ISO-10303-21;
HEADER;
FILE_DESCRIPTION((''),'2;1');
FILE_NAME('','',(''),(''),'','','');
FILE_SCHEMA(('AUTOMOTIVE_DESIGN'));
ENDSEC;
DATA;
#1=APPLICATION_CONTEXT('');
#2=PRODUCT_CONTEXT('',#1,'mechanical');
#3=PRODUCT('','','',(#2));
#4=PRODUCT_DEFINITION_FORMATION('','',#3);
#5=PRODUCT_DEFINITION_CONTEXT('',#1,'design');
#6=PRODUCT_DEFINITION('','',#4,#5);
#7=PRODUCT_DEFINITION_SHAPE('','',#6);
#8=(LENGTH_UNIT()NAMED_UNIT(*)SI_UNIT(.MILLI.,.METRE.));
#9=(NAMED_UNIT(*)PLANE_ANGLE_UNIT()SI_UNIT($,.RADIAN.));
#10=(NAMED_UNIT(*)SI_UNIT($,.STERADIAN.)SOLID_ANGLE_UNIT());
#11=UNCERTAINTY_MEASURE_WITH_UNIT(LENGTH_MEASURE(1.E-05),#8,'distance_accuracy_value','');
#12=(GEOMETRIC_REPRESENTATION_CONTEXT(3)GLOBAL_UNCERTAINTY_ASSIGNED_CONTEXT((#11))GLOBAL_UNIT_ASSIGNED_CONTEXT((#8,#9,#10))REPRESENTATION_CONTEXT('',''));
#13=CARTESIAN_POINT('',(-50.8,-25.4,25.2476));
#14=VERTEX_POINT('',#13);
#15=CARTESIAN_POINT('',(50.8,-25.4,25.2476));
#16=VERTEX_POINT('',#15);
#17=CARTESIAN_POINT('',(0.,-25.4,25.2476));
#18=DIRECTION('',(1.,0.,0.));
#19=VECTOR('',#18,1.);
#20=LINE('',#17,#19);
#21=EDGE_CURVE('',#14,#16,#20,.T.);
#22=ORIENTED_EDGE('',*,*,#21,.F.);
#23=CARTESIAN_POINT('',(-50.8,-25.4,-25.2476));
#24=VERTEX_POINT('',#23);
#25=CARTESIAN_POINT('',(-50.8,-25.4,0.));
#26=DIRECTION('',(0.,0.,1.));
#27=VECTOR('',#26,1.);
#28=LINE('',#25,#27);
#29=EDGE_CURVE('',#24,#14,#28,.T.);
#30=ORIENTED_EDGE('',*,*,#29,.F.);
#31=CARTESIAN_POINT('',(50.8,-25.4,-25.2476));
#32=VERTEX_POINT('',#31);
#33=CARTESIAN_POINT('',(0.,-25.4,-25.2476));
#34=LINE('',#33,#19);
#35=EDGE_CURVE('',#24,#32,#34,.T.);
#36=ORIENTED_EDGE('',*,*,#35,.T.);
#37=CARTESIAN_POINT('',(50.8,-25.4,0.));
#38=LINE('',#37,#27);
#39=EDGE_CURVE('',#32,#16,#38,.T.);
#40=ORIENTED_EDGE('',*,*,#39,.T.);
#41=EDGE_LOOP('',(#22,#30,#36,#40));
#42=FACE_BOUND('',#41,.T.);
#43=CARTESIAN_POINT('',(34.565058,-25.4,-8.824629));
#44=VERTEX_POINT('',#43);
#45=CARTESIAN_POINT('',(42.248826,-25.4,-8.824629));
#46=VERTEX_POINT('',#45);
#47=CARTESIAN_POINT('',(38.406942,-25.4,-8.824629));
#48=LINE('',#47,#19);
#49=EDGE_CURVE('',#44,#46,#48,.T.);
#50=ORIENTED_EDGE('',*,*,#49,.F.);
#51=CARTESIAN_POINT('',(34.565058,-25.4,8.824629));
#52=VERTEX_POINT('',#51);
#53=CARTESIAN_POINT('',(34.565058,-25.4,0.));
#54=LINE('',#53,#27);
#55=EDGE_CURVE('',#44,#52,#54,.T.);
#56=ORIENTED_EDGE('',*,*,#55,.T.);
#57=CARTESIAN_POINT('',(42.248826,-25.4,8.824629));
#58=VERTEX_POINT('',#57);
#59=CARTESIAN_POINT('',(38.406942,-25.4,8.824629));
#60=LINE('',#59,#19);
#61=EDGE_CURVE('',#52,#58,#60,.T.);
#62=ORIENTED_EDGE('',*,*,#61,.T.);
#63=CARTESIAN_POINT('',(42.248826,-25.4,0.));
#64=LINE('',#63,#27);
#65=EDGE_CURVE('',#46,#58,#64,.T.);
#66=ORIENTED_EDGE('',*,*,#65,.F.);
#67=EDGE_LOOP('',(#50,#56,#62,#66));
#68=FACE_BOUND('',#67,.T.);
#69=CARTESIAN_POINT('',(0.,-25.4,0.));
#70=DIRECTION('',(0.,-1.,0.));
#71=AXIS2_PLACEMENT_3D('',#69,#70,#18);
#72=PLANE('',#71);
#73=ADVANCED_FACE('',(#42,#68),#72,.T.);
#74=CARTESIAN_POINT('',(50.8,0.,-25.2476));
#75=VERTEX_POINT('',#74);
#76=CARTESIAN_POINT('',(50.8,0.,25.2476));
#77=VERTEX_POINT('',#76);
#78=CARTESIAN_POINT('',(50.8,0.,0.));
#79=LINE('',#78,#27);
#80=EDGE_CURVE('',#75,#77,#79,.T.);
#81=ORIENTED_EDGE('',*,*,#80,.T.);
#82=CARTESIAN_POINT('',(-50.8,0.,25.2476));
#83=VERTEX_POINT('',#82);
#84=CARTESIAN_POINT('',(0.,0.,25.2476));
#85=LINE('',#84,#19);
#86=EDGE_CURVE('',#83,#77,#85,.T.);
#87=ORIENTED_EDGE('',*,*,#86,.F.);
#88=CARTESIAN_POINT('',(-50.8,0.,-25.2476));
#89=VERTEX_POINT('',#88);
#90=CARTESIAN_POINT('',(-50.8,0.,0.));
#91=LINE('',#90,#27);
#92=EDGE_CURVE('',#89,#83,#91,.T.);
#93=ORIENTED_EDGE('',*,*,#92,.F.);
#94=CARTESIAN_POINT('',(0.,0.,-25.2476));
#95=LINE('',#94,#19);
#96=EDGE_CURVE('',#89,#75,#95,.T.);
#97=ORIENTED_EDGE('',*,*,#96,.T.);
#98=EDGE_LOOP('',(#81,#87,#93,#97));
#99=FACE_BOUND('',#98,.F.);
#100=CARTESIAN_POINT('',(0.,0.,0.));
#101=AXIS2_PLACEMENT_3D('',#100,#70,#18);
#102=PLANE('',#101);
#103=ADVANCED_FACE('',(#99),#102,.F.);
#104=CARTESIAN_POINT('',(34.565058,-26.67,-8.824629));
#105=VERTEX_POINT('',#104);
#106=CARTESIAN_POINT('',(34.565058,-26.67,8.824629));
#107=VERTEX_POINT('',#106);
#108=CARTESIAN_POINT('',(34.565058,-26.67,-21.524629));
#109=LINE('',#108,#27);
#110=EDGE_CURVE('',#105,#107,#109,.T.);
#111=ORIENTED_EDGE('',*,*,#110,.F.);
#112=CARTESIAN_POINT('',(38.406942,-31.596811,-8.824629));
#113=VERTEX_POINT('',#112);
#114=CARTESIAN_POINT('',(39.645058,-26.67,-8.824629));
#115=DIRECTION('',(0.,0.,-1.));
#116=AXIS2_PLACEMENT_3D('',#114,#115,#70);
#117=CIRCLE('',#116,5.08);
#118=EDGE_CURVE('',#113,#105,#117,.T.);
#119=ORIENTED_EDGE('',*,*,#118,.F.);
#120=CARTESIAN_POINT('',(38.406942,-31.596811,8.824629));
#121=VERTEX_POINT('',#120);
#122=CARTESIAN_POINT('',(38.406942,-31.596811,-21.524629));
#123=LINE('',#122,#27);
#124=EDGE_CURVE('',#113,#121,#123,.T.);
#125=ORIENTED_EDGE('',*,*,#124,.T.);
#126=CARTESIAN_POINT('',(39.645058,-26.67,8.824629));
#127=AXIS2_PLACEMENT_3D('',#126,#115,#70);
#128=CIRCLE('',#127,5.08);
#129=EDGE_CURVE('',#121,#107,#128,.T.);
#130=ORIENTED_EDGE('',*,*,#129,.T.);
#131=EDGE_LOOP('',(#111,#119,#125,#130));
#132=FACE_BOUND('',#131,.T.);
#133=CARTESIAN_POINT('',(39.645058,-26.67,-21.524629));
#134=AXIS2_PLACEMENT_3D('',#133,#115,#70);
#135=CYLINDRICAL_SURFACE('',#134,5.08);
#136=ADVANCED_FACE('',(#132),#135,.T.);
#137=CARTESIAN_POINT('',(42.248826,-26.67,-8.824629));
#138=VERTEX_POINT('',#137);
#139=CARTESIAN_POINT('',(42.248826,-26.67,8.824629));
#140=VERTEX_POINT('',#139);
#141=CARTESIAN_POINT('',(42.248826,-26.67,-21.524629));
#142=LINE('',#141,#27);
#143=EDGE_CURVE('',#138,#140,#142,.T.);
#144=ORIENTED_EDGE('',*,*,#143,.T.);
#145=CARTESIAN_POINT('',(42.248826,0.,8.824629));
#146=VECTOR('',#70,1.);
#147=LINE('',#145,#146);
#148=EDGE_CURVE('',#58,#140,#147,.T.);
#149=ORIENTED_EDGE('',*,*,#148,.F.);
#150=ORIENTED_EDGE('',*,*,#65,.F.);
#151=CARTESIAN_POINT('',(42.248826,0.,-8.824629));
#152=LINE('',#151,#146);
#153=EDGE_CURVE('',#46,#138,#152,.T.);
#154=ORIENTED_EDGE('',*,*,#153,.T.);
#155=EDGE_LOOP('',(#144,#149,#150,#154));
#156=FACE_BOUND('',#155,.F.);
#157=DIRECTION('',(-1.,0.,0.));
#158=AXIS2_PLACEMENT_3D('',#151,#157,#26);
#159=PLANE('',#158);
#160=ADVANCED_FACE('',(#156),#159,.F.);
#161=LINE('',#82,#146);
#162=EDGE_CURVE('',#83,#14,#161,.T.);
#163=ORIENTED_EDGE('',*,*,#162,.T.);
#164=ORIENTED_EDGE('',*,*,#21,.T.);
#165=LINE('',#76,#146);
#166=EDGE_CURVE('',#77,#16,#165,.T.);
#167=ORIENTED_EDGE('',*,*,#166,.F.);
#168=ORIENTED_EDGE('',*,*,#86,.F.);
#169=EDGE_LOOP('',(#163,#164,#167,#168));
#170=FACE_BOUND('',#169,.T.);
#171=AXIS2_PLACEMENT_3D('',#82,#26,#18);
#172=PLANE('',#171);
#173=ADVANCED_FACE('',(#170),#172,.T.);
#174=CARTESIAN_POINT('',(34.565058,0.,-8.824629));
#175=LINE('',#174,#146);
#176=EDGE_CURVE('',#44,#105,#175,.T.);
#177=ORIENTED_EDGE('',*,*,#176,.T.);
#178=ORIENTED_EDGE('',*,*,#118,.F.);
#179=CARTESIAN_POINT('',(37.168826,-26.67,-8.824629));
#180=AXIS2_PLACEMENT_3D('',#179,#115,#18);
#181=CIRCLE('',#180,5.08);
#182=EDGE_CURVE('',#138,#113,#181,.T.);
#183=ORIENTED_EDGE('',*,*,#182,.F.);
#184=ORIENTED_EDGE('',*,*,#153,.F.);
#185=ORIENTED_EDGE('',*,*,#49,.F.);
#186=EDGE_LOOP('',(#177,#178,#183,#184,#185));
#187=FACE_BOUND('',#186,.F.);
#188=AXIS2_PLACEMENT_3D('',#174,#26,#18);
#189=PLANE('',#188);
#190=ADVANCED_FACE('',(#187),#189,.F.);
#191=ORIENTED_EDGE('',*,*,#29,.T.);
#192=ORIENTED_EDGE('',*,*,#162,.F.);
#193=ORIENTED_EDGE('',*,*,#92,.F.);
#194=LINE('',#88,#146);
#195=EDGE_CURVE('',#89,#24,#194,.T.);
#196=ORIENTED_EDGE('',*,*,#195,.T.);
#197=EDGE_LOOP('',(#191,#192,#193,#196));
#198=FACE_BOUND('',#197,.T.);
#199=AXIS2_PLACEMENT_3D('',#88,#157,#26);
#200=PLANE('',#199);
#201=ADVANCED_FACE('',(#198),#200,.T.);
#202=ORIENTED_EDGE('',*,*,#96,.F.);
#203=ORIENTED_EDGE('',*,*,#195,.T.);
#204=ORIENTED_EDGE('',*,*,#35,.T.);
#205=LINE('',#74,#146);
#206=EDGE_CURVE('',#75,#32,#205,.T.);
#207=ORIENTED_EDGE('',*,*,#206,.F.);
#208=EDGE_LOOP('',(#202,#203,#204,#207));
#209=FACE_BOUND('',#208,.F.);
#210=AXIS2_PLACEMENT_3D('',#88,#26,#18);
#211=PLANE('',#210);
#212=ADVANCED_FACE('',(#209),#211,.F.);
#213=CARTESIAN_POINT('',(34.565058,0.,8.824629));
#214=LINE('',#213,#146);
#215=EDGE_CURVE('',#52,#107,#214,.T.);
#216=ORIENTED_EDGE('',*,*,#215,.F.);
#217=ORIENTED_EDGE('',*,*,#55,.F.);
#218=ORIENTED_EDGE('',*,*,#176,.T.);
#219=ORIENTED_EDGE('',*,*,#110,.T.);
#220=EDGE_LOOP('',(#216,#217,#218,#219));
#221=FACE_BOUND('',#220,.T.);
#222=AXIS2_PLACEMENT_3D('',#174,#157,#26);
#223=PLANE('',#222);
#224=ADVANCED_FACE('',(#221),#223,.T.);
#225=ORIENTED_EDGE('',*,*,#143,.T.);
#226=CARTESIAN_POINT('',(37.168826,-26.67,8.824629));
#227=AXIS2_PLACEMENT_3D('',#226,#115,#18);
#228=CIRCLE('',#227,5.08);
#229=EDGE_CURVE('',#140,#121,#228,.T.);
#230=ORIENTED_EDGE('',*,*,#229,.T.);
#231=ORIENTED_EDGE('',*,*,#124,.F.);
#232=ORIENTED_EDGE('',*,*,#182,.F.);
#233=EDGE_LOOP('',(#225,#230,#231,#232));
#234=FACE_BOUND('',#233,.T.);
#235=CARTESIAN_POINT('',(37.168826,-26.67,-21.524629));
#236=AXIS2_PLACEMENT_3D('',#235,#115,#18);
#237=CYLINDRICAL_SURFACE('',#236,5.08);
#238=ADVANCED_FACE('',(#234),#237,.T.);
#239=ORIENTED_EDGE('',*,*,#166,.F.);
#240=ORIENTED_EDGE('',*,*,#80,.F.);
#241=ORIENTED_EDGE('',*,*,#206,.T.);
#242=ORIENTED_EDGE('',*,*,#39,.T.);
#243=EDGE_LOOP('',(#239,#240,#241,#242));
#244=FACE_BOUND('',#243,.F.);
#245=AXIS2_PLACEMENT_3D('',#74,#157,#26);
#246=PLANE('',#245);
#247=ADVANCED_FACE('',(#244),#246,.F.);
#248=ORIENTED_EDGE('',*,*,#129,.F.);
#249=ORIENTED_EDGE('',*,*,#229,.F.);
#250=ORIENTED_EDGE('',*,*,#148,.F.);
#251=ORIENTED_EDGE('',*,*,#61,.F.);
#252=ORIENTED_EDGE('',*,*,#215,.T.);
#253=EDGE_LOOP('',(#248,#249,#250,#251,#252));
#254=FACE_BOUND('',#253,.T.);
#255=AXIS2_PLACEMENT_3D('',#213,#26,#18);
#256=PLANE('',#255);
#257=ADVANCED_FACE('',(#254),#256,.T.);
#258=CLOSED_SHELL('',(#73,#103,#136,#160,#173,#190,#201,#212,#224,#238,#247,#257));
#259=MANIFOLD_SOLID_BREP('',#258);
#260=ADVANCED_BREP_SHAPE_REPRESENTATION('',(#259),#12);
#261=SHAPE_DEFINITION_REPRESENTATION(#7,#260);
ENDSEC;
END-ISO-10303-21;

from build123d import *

# Parameters (mm, degrees)
F0_W        = 7.6837688684
F0_H        = 17.6492575556
F1_DEPTH    = 31.75
F0_W_2      = 101.6
F0_H_2      = 50.4952
F2_DEPTH    = 25.4
F3_T1_DEPTH = 43.0492575556


# Not quite as in the source:
# - a fillet or chamfer that OpenCascade refuses, or shapes differently, is made with other operations: its cross-section is extruded or revolved along the edge and cut away or added


with BuildPart() as f1:
    # F0 (on Front) → F1 (new body)
    with BuildSketch(Plane.XZ):
        with Locations((38.4069420397, 0)):
            Rectangle(F0_W, F0_H)
    extrude(amount=F1_DEPTH)

    # F0 (on Front) → F2 (join)
    with BuildSketch(Plane.XZ):
        Rectangle(F0_W_2, F0_H_2)
        with Locations((38.4069420397, 0)):
            Rectangle(F0_W, F0_H, mode=Mode.SUBTRACT)
    extrude(amount=F2_DEPTH)

    # F3: fillet of radius 5.08 on 2 edges, made by hand

    # F3_s2 → F3_t1 (cut)
    with BuildSketch(Plane.XY.offset(-21.5246287778)):
        with BuildLine():
            ThreePointArc((42.248826474, -26.67), (40.7609289224, -30.2621024484), (37.168826474, -31.75))
            Line((37.168826474, -31.75), (42.248826474, -31.75))
            Line((42.248826474, -31.75), (42.248826474, -26.67))
        make_face()
        with BuildLine():
            ThreePointArc((39.6450576055, -31.75), (36.0529551571, -30.2621024484), (34.5650576055, -26.67))
            Line((34.5650576055, -26.67), (34.5650576055, -31.75))
            Line((34.5650576055, -31.75), (39.6450576055, -31.75))
        make_face()
    extrude(amount=F3_T1_DEPTH, mode=Mode.SUBTRACT)


solid = f1.part
